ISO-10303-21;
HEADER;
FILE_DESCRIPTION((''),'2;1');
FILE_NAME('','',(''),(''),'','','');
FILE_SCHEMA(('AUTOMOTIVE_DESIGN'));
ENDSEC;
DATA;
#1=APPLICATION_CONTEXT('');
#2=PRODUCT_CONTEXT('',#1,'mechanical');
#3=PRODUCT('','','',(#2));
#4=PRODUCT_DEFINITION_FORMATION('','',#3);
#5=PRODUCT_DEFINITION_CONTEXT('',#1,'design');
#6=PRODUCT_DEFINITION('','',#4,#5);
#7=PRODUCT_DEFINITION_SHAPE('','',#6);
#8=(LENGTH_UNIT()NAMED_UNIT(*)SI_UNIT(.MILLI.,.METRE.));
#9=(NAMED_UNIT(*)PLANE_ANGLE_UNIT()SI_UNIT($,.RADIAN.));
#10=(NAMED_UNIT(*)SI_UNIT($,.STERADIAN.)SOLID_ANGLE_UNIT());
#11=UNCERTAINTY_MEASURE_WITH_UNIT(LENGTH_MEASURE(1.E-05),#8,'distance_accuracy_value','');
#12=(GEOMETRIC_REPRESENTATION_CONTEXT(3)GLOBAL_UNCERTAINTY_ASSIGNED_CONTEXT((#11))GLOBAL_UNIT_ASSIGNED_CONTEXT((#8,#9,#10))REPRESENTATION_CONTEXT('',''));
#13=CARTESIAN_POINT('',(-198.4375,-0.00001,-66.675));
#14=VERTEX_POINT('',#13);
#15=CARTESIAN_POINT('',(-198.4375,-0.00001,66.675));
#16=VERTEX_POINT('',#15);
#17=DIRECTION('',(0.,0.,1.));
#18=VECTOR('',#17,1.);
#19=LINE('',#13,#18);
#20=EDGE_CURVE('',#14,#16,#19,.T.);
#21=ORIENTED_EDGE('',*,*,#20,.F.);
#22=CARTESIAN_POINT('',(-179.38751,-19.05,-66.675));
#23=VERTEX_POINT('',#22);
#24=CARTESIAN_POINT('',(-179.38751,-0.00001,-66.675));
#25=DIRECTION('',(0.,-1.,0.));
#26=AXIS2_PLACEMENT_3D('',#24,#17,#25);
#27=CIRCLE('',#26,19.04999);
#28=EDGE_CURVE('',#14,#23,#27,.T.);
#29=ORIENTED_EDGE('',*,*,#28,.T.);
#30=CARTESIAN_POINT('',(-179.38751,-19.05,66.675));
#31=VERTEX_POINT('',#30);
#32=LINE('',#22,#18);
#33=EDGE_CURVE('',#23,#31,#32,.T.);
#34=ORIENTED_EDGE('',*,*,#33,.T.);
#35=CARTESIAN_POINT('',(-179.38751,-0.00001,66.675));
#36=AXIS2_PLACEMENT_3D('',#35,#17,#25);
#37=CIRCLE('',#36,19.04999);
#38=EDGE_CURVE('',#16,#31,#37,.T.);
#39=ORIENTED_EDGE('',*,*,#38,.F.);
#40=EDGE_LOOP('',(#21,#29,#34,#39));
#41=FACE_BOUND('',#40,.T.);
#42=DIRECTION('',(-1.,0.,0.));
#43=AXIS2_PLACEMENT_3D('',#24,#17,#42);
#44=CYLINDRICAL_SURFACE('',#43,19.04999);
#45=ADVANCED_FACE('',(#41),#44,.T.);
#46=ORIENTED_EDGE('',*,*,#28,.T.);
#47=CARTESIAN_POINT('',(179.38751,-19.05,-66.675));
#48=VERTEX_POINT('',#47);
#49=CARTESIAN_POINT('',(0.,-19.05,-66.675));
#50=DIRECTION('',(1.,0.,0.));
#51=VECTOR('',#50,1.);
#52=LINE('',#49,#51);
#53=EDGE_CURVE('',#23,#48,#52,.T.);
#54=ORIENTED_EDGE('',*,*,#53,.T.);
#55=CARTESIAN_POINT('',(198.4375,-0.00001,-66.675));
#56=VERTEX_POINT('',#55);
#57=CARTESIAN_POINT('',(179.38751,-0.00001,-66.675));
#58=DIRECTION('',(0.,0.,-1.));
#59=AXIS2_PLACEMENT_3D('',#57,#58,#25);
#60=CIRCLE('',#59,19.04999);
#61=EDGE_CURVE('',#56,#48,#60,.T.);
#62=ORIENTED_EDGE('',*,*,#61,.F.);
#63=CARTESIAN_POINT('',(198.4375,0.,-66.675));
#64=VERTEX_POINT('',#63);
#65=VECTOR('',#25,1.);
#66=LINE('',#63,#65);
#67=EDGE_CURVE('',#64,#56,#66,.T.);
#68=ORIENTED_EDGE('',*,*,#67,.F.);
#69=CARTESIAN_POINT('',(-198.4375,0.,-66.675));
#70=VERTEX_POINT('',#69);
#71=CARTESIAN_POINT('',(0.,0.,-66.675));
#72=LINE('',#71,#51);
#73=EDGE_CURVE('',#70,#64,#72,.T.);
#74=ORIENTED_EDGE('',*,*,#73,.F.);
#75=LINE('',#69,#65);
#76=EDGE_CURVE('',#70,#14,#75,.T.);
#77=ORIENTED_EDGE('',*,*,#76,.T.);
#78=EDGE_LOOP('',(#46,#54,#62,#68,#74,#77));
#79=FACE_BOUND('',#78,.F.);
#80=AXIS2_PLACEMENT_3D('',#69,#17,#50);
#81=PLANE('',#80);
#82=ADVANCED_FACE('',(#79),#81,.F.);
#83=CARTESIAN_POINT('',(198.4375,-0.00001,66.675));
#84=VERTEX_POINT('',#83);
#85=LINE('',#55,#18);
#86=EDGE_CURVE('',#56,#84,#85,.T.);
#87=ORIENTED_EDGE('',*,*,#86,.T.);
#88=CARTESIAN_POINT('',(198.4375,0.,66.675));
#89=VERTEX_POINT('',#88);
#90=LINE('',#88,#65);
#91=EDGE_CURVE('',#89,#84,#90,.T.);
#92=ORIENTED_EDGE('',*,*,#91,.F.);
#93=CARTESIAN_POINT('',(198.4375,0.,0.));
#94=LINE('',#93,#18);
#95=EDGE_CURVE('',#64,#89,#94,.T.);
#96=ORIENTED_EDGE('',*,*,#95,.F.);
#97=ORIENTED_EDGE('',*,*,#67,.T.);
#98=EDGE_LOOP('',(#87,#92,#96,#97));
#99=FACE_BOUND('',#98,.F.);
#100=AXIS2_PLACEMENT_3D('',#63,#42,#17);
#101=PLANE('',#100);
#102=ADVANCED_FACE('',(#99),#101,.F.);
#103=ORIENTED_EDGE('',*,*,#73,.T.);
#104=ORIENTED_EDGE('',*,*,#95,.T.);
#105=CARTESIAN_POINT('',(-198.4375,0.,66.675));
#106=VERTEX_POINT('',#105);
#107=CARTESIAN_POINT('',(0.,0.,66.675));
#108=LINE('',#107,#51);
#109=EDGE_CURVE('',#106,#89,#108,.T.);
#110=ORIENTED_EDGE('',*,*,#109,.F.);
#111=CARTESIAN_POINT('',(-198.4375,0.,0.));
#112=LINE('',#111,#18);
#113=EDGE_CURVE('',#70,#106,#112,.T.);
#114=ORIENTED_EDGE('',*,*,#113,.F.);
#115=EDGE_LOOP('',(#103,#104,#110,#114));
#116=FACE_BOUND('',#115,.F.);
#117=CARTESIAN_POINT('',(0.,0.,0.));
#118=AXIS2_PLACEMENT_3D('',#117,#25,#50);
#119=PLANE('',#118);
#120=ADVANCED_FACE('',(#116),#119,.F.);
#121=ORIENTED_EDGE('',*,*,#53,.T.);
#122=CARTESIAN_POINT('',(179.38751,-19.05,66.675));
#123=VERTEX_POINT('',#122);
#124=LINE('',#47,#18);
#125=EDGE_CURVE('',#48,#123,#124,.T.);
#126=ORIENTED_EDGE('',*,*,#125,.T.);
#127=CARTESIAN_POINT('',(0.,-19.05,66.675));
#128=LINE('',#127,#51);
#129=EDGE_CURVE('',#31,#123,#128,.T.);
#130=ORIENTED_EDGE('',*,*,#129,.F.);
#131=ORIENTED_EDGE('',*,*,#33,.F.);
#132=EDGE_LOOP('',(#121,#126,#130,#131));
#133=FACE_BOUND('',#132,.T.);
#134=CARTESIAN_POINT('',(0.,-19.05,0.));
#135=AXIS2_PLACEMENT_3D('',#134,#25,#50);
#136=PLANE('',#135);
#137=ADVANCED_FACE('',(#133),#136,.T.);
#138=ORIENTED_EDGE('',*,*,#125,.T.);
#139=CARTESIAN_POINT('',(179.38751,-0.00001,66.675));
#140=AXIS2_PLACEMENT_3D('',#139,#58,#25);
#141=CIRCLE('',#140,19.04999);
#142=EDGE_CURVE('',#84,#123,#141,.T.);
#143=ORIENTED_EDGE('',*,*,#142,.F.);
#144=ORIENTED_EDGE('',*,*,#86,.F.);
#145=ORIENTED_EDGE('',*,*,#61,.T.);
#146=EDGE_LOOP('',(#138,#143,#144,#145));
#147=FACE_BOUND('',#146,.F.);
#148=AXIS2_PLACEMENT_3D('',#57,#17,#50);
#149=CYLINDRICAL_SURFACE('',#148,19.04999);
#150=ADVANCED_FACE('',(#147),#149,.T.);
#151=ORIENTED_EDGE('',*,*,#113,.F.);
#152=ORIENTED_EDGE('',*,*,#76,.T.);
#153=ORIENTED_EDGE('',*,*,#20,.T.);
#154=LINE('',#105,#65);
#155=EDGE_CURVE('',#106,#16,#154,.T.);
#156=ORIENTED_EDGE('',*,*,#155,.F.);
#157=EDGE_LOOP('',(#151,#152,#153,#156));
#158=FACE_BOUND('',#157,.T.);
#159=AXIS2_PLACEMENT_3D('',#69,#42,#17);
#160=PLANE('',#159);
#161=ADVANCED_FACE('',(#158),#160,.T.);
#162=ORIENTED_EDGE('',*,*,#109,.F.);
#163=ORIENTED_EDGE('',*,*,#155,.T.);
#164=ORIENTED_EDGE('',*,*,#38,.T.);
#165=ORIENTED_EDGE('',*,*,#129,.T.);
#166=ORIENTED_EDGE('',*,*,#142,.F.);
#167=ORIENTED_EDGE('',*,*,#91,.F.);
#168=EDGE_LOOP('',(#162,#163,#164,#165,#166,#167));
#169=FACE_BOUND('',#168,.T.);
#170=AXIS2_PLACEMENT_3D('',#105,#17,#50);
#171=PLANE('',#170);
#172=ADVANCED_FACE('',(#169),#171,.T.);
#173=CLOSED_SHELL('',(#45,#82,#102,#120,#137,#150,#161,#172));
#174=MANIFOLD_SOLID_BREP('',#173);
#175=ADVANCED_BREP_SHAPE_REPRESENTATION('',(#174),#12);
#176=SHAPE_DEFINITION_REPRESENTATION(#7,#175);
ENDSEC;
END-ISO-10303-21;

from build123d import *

# Parameters (mm, degrees)
F0_W     = 396.875
F0_H     = 133.35
F1_DEPTH = 19.05
F2_R     = 19.04999


# Not quite as in the source:
# - a fillet or chamfer is up to 0.001 mm smaller than in the source, because OpenCascade refuses the exact size


with BuildPart() as f1:
    # F0 (on Front) → F1 (new body)
    with BuildSketch(Plane.XZ):
        Rectangle(F0_W, F0_H)
    extrude(amount=F1_DEPTH)

    # F2 (radius 19.05 in the source; OpenCascade refuses exactly that, so slightly less here)
    f2_edges = [f1.edges().sort_by_distance(p)[0] for p in [
        (-198.4375, -19.05, 0),
        (198.4375, -19.05, 0),
    ]]
    fillet(f2_edges, radius=F2_R)


solid = f1.part
